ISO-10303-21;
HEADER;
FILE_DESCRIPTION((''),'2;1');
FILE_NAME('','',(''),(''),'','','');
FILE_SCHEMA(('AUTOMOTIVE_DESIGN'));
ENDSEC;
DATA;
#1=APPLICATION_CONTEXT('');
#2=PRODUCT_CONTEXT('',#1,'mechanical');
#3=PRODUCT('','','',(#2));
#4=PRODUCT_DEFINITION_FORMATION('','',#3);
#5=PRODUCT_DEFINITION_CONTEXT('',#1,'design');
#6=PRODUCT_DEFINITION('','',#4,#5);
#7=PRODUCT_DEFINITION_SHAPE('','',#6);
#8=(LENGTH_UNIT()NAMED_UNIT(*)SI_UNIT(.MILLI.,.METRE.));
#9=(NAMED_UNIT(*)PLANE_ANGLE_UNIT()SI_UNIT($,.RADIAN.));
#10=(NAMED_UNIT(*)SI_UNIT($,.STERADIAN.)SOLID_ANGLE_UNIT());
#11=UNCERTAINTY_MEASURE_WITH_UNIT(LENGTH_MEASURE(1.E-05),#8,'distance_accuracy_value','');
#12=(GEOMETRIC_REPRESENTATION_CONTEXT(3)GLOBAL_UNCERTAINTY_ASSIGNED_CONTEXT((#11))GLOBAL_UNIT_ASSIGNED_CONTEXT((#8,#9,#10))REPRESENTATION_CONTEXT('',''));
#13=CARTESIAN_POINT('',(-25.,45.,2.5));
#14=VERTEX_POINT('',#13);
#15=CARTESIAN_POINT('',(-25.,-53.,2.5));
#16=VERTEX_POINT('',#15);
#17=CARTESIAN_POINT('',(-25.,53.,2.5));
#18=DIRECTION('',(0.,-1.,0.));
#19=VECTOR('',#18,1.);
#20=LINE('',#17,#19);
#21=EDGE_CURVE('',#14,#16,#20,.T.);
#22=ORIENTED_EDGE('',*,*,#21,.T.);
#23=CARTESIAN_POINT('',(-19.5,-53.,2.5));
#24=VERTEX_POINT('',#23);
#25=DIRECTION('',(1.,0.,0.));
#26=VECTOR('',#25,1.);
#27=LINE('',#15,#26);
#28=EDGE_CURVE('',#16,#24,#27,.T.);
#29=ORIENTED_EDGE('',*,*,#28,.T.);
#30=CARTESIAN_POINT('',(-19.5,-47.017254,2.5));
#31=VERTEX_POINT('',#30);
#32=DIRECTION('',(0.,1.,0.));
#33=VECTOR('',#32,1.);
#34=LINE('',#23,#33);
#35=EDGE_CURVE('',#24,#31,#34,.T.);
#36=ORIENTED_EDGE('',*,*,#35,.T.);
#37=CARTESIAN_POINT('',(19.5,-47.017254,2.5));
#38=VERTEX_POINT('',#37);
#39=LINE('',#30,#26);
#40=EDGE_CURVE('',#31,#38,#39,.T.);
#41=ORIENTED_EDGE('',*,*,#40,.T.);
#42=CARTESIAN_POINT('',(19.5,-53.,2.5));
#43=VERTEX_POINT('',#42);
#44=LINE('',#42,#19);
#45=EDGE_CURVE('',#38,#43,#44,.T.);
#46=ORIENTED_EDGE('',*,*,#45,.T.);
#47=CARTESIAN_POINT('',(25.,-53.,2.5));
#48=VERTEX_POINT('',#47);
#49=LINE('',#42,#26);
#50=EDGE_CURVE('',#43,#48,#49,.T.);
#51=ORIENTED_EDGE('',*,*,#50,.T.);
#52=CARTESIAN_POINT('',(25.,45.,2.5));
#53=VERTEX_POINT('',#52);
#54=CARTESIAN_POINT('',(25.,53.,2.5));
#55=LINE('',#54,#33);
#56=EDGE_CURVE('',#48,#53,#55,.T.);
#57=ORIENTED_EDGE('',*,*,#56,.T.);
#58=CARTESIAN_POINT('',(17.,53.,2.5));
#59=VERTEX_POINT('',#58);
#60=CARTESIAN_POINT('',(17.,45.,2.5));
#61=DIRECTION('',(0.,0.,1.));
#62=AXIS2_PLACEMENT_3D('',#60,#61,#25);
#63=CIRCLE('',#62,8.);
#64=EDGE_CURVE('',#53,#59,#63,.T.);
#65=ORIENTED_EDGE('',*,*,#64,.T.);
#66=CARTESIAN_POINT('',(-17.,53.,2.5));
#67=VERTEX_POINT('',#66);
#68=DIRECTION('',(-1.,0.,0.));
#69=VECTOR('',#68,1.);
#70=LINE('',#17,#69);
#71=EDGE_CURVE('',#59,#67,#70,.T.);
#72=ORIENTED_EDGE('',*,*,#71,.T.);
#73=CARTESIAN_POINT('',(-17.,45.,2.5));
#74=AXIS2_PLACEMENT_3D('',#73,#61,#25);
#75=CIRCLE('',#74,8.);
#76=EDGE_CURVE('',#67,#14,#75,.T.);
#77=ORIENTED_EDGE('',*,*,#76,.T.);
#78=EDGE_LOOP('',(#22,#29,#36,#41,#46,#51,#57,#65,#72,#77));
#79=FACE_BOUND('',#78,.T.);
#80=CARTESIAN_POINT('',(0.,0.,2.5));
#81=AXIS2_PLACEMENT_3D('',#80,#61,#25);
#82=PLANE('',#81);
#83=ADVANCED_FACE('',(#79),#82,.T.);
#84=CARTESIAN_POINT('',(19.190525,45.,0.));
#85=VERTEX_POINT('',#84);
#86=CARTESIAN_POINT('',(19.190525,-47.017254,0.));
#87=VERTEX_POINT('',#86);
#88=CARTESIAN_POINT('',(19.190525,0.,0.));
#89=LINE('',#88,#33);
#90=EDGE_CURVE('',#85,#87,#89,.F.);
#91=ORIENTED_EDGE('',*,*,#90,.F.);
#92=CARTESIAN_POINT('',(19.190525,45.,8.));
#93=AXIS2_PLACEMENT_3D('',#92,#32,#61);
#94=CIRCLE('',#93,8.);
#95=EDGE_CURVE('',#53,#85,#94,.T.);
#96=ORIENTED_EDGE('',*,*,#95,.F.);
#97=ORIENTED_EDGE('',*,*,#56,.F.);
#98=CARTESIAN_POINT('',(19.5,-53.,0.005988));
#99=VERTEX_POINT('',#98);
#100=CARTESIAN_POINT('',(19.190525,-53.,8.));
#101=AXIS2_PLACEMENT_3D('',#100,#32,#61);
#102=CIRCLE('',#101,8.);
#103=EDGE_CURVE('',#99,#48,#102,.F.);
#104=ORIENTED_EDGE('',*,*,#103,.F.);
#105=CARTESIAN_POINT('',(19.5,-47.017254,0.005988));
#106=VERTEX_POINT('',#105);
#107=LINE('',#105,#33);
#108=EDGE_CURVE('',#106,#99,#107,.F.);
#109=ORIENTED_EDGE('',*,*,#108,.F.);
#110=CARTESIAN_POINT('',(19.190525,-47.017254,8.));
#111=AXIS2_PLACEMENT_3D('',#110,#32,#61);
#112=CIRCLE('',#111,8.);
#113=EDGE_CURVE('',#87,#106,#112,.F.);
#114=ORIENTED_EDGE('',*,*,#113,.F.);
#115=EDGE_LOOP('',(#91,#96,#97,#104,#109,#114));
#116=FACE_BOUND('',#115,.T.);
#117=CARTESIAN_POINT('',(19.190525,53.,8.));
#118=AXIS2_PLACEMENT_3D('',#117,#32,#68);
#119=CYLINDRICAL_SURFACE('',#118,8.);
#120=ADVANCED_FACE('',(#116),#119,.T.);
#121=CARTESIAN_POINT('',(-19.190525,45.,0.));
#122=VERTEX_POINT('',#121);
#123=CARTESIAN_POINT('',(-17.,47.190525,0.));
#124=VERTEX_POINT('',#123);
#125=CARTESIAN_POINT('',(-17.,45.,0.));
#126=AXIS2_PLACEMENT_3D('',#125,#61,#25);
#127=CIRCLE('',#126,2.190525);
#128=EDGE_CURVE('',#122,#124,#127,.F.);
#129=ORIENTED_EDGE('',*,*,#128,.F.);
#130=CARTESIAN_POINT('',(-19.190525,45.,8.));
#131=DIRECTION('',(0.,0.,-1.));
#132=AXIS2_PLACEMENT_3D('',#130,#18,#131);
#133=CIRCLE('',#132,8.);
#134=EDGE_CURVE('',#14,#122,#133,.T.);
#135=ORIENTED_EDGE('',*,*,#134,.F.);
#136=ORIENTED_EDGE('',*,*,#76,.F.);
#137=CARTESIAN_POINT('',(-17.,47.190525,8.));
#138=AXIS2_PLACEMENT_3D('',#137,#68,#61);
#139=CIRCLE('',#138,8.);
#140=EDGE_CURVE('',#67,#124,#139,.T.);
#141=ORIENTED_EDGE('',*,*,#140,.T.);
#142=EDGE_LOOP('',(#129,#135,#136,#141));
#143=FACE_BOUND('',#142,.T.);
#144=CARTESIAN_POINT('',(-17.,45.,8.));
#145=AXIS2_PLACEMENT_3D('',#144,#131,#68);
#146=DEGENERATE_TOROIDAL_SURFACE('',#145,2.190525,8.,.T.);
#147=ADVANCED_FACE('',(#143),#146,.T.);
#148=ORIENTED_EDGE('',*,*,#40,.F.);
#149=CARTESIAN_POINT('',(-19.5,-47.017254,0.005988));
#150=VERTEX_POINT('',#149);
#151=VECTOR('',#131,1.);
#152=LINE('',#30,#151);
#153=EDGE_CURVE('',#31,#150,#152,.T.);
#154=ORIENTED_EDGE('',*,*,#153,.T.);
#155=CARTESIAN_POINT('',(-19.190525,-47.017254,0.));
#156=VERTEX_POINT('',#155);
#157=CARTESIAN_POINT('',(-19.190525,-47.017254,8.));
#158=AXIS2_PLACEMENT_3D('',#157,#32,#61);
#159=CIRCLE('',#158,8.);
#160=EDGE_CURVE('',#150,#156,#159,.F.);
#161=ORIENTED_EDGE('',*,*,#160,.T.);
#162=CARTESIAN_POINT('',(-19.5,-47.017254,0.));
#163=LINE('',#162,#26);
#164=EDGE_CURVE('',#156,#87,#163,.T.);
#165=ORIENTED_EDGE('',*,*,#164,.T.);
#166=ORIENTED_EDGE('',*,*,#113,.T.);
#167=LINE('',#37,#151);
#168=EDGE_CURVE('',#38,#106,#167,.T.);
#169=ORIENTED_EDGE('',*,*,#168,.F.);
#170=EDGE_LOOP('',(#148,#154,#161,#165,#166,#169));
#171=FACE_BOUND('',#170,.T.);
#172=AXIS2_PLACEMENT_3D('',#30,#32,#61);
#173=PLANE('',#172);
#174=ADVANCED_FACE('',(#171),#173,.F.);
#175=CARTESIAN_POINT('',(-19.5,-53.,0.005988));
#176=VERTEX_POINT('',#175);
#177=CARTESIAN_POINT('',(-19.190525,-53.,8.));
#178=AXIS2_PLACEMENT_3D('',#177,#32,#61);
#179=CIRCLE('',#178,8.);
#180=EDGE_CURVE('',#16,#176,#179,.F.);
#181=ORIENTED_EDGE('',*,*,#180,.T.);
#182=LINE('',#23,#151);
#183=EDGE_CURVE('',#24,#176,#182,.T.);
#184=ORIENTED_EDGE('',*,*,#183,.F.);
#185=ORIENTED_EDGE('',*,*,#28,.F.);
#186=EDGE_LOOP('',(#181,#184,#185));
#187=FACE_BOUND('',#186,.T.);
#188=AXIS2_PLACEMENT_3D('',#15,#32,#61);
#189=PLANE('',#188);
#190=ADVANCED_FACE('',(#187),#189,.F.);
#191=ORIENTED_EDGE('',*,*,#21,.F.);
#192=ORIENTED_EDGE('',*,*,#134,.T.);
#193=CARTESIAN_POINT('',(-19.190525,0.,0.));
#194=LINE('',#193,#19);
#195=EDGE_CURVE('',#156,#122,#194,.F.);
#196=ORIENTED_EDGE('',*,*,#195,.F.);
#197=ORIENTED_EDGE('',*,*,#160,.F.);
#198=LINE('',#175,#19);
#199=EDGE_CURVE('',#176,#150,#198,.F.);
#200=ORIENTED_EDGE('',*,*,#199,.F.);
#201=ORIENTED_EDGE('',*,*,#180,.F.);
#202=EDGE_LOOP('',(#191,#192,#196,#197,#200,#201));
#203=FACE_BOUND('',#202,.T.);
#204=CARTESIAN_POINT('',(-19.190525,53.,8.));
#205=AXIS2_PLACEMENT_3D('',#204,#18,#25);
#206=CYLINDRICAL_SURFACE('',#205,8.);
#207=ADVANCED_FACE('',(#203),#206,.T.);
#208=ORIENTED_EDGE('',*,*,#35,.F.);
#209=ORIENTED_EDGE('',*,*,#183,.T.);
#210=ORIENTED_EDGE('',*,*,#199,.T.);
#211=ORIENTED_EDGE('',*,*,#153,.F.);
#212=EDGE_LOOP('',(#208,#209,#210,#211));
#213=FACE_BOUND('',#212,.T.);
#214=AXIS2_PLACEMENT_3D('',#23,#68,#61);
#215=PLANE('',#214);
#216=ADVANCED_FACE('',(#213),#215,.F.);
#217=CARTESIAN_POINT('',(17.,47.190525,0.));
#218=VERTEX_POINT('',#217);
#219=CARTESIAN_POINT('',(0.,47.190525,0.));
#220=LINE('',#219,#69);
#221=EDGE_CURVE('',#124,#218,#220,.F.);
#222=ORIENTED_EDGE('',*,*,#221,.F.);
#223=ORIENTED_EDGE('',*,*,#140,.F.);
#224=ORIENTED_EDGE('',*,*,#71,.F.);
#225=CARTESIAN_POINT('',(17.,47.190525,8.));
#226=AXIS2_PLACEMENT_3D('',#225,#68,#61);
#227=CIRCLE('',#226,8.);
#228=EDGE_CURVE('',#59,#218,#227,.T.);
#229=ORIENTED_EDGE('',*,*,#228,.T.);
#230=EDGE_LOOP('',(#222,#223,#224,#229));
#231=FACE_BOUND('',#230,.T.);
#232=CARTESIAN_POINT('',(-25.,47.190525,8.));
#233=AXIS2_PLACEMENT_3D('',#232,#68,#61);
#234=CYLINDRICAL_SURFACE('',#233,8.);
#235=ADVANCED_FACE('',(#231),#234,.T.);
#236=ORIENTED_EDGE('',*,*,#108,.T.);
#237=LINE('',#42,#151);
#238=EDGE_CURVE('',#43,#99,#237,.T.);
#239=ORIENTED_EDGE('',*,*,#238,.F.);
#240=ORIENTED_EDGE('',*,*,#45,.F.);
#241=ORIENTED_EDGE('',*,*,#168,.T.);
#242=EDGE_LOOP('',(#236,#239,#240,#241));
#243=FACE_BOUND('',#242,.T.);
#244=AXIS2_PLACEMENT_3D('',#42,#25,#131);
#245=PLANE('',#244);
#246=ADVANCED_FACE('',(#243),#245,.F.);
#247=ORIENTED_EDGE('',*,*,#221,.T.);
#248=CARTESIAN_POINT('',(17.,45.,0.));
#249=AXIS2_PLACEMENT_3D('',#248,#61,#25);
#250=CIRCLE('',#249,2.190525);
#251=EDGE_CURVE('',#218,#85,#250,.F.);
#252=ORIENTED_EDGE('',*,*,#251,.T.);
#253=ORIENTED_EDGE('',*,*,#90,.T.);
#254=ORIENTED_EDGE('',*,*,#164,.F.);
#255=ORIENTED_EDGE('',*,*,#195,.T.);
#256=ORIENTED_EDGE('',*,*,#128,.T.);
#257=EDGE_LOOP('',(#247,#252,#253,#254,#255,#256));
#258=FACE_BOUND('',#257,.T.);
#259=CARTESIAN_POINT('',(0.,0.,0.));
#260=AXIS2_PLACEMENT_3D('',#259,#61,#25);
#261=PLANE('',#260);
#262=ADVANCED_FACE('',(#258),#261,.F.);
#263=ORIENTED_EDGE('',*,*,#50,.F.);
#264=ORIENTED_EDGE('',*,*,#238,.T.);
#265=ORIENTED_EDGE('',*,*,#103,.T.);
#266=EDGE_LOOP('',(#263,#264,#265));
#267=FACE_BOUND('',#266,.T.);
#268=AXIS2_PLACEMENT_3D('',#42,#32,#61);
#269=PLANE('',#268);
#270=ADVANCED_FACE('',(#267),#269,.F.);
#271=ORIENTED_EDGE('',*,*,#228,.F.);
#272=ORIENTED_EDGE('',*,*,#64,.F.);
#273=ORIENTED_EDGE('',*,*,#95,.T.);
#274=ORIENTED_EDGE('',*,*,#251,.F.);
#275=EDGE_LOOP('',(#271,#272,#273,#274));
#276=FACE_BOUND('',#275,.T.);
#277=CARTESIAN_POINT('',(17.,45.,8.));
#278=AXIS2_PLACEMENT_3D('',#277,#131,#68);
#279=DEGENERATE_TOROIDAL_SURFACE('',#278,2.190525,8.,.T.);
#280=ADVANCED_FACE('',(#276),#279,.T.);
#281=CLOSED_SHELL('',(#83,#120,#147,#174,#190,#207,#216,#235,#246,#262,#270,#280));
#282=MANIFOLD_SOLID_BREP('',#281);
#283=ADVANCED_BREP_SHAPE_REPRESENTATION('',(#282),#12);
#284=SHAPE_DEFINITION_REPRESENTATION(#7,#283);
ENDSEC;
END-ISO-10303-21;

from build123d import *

# Parameters (mm, degrees)
BOSS_EXTRUDE1_DEPTH = 2.5
FILLET1_R           = 8
FILLET2_R           = 8


with BuildPart() as part:
    # Sketch1 → Boss-Extrude1 (new body)
    with BuildSketch(Plane.XY):
        Polygon((19.5, -53), (25, -53), (25, 53), (-25, 53), (-25, -53), (-19.5, -53), (-19.5, -47.017253966), (19.5, -47.017253966), align=None)
    extrude(amount=BOSS_EXTRUDE1_DEPTH)

    # Fillet1
    fillet1_edges = [part.edges().sort_by_distance(p)[0] for p in [
        (-25, 53, 1.25),
        (25, 53, 1.25),
    ]]
    fillet(fillet1_edges, radius=FILLET1_R)

    # Fillet2
    # the kernel refuses this fillet: 8 mm, written as the material it takes off along each edge
    with BuildSketch(Plane(origin=(-25, 45, 0), x_dir=(1, 0, 0), z_dir=(0, -1, 0))) as fillet2_piece_1:
        with BuildLine():
            CenterArc((5.809475019, 8), FILLET2_R, 223.432536558, 46.567463442)
            Line((0, 2.5), (-0.1161895, 2.39))
            ThreePointArc((-0.1161895, 2.39), (-0.16, 1.25), (-0.16, 0))
            Line((-0.16, 0), (0, -0.16))
            Line((0, -0.16), (5.809475019, -0.16))
            Line((5.809475019, -0.16), (5.809475019, 0))
        make_face()
    extrude(amount=112.523687548, mode=Mode.SUBTRACT)
    with BuildSketch(Plane(origin=(-17, 45, 0), x_dir=(0, 1, 0), z_dir=(1, 0, 0))) as fillet2_piece_2:
        with BuildLine():
            CenterArc((2.190524981, 8), FILLET2_R, 270, 46.567463442)
            Line((8, 2.5), (8.1161895, 2.39))
            ThreePointArc((8.1161895, 2.39), (8.16, 1.25), (8.16, 0))
            Line((8.16, 0), (8, -0.16))
            Line((8, -0.16), (2.190524981, -0.16))
            Line((2.190524981, -0.16), (2.190524981, 0))
        make_face()
    revolve(axis=Axis((-17, 45, 0), (0, 0, 1)), revolution_arc=90, mode=Mode.SUBTRACT)
    with BuildSketch(Plane(origin=(17, 53, 0), x_dir=(0, -1, 0), z_dir=(-1, 0, 0))) as fillet2_piece_3:
        with BuildLine():
            CenterArc((5.809475019, 8), FILLET2_R, 223.432536558, 46.567463442)
            Line((0, 2.5), (-0.1161895, 2.39))
            ThreePointArc((-0.1161895, 2.39), (-0.16, 1.25), (-0.16, 0))
            Line((-0.16, 0), (0, -0.16))
            Line((0, -0.16), (5.809475019, -0.16))
            Line((5.809475019, -0.16), (5.809475019, 0))
        make_face()
    extrude(amount=34, mode=Mode.SUBTRACT)
    with BuildSketch(Plane(origin=(17, 45, 0), x_dir=(1, 0, 0), z_dir=(0, -1, 0))) as fillet2_piece_4:
        with BuildLine():
            CenterArc((2.190524981, 8), FILLET2_R, 270, 46.567463442)
            Line((8, 2.5), (8.1161895, 2.39))
            ThreePointArc((8.1161895, 2.39), (8.16, 1.25), (8.16, 0))
            Line((8.16, 0), (8, -0.16))
            Line((8, -0.16), (2.190524981, -0.16))
            Line((2.190524981, -0.16), (2.190524981, 0))
        make_face()
    revolve(axis=Axis((17, 45, 0), (0, 0, 1)), revolution_arc=90, mode=Mode.SUBTRACT)
    with BuildSketch(Plane(origin=(25, -67.523687548, 0), x_dir=(0, 0, 1), z_dir=(0, 1, 0))) as fillet2_piece_5:
        with BuildLine():
            CenterArc((8, -5.809475019), FILLET2_R, 133.432536558, 46.567463442)
            Line((0, -5.809475019), (-0.16, -5.809475019))
            Line((-0.16, -5.809475019), (-0.16, 0))
            Line((-0.16, 0), (0, 0.16))
            ThreePointArc((0, 0.16), (1.25, 0.16), (2.39, 0.1161895))
            Line((2.39, 0.1161895), (2.5, 0))
        make_face()
    extrude(amount=112.523687548, mode=Mode.SUBTRACT)


solid = part.part
